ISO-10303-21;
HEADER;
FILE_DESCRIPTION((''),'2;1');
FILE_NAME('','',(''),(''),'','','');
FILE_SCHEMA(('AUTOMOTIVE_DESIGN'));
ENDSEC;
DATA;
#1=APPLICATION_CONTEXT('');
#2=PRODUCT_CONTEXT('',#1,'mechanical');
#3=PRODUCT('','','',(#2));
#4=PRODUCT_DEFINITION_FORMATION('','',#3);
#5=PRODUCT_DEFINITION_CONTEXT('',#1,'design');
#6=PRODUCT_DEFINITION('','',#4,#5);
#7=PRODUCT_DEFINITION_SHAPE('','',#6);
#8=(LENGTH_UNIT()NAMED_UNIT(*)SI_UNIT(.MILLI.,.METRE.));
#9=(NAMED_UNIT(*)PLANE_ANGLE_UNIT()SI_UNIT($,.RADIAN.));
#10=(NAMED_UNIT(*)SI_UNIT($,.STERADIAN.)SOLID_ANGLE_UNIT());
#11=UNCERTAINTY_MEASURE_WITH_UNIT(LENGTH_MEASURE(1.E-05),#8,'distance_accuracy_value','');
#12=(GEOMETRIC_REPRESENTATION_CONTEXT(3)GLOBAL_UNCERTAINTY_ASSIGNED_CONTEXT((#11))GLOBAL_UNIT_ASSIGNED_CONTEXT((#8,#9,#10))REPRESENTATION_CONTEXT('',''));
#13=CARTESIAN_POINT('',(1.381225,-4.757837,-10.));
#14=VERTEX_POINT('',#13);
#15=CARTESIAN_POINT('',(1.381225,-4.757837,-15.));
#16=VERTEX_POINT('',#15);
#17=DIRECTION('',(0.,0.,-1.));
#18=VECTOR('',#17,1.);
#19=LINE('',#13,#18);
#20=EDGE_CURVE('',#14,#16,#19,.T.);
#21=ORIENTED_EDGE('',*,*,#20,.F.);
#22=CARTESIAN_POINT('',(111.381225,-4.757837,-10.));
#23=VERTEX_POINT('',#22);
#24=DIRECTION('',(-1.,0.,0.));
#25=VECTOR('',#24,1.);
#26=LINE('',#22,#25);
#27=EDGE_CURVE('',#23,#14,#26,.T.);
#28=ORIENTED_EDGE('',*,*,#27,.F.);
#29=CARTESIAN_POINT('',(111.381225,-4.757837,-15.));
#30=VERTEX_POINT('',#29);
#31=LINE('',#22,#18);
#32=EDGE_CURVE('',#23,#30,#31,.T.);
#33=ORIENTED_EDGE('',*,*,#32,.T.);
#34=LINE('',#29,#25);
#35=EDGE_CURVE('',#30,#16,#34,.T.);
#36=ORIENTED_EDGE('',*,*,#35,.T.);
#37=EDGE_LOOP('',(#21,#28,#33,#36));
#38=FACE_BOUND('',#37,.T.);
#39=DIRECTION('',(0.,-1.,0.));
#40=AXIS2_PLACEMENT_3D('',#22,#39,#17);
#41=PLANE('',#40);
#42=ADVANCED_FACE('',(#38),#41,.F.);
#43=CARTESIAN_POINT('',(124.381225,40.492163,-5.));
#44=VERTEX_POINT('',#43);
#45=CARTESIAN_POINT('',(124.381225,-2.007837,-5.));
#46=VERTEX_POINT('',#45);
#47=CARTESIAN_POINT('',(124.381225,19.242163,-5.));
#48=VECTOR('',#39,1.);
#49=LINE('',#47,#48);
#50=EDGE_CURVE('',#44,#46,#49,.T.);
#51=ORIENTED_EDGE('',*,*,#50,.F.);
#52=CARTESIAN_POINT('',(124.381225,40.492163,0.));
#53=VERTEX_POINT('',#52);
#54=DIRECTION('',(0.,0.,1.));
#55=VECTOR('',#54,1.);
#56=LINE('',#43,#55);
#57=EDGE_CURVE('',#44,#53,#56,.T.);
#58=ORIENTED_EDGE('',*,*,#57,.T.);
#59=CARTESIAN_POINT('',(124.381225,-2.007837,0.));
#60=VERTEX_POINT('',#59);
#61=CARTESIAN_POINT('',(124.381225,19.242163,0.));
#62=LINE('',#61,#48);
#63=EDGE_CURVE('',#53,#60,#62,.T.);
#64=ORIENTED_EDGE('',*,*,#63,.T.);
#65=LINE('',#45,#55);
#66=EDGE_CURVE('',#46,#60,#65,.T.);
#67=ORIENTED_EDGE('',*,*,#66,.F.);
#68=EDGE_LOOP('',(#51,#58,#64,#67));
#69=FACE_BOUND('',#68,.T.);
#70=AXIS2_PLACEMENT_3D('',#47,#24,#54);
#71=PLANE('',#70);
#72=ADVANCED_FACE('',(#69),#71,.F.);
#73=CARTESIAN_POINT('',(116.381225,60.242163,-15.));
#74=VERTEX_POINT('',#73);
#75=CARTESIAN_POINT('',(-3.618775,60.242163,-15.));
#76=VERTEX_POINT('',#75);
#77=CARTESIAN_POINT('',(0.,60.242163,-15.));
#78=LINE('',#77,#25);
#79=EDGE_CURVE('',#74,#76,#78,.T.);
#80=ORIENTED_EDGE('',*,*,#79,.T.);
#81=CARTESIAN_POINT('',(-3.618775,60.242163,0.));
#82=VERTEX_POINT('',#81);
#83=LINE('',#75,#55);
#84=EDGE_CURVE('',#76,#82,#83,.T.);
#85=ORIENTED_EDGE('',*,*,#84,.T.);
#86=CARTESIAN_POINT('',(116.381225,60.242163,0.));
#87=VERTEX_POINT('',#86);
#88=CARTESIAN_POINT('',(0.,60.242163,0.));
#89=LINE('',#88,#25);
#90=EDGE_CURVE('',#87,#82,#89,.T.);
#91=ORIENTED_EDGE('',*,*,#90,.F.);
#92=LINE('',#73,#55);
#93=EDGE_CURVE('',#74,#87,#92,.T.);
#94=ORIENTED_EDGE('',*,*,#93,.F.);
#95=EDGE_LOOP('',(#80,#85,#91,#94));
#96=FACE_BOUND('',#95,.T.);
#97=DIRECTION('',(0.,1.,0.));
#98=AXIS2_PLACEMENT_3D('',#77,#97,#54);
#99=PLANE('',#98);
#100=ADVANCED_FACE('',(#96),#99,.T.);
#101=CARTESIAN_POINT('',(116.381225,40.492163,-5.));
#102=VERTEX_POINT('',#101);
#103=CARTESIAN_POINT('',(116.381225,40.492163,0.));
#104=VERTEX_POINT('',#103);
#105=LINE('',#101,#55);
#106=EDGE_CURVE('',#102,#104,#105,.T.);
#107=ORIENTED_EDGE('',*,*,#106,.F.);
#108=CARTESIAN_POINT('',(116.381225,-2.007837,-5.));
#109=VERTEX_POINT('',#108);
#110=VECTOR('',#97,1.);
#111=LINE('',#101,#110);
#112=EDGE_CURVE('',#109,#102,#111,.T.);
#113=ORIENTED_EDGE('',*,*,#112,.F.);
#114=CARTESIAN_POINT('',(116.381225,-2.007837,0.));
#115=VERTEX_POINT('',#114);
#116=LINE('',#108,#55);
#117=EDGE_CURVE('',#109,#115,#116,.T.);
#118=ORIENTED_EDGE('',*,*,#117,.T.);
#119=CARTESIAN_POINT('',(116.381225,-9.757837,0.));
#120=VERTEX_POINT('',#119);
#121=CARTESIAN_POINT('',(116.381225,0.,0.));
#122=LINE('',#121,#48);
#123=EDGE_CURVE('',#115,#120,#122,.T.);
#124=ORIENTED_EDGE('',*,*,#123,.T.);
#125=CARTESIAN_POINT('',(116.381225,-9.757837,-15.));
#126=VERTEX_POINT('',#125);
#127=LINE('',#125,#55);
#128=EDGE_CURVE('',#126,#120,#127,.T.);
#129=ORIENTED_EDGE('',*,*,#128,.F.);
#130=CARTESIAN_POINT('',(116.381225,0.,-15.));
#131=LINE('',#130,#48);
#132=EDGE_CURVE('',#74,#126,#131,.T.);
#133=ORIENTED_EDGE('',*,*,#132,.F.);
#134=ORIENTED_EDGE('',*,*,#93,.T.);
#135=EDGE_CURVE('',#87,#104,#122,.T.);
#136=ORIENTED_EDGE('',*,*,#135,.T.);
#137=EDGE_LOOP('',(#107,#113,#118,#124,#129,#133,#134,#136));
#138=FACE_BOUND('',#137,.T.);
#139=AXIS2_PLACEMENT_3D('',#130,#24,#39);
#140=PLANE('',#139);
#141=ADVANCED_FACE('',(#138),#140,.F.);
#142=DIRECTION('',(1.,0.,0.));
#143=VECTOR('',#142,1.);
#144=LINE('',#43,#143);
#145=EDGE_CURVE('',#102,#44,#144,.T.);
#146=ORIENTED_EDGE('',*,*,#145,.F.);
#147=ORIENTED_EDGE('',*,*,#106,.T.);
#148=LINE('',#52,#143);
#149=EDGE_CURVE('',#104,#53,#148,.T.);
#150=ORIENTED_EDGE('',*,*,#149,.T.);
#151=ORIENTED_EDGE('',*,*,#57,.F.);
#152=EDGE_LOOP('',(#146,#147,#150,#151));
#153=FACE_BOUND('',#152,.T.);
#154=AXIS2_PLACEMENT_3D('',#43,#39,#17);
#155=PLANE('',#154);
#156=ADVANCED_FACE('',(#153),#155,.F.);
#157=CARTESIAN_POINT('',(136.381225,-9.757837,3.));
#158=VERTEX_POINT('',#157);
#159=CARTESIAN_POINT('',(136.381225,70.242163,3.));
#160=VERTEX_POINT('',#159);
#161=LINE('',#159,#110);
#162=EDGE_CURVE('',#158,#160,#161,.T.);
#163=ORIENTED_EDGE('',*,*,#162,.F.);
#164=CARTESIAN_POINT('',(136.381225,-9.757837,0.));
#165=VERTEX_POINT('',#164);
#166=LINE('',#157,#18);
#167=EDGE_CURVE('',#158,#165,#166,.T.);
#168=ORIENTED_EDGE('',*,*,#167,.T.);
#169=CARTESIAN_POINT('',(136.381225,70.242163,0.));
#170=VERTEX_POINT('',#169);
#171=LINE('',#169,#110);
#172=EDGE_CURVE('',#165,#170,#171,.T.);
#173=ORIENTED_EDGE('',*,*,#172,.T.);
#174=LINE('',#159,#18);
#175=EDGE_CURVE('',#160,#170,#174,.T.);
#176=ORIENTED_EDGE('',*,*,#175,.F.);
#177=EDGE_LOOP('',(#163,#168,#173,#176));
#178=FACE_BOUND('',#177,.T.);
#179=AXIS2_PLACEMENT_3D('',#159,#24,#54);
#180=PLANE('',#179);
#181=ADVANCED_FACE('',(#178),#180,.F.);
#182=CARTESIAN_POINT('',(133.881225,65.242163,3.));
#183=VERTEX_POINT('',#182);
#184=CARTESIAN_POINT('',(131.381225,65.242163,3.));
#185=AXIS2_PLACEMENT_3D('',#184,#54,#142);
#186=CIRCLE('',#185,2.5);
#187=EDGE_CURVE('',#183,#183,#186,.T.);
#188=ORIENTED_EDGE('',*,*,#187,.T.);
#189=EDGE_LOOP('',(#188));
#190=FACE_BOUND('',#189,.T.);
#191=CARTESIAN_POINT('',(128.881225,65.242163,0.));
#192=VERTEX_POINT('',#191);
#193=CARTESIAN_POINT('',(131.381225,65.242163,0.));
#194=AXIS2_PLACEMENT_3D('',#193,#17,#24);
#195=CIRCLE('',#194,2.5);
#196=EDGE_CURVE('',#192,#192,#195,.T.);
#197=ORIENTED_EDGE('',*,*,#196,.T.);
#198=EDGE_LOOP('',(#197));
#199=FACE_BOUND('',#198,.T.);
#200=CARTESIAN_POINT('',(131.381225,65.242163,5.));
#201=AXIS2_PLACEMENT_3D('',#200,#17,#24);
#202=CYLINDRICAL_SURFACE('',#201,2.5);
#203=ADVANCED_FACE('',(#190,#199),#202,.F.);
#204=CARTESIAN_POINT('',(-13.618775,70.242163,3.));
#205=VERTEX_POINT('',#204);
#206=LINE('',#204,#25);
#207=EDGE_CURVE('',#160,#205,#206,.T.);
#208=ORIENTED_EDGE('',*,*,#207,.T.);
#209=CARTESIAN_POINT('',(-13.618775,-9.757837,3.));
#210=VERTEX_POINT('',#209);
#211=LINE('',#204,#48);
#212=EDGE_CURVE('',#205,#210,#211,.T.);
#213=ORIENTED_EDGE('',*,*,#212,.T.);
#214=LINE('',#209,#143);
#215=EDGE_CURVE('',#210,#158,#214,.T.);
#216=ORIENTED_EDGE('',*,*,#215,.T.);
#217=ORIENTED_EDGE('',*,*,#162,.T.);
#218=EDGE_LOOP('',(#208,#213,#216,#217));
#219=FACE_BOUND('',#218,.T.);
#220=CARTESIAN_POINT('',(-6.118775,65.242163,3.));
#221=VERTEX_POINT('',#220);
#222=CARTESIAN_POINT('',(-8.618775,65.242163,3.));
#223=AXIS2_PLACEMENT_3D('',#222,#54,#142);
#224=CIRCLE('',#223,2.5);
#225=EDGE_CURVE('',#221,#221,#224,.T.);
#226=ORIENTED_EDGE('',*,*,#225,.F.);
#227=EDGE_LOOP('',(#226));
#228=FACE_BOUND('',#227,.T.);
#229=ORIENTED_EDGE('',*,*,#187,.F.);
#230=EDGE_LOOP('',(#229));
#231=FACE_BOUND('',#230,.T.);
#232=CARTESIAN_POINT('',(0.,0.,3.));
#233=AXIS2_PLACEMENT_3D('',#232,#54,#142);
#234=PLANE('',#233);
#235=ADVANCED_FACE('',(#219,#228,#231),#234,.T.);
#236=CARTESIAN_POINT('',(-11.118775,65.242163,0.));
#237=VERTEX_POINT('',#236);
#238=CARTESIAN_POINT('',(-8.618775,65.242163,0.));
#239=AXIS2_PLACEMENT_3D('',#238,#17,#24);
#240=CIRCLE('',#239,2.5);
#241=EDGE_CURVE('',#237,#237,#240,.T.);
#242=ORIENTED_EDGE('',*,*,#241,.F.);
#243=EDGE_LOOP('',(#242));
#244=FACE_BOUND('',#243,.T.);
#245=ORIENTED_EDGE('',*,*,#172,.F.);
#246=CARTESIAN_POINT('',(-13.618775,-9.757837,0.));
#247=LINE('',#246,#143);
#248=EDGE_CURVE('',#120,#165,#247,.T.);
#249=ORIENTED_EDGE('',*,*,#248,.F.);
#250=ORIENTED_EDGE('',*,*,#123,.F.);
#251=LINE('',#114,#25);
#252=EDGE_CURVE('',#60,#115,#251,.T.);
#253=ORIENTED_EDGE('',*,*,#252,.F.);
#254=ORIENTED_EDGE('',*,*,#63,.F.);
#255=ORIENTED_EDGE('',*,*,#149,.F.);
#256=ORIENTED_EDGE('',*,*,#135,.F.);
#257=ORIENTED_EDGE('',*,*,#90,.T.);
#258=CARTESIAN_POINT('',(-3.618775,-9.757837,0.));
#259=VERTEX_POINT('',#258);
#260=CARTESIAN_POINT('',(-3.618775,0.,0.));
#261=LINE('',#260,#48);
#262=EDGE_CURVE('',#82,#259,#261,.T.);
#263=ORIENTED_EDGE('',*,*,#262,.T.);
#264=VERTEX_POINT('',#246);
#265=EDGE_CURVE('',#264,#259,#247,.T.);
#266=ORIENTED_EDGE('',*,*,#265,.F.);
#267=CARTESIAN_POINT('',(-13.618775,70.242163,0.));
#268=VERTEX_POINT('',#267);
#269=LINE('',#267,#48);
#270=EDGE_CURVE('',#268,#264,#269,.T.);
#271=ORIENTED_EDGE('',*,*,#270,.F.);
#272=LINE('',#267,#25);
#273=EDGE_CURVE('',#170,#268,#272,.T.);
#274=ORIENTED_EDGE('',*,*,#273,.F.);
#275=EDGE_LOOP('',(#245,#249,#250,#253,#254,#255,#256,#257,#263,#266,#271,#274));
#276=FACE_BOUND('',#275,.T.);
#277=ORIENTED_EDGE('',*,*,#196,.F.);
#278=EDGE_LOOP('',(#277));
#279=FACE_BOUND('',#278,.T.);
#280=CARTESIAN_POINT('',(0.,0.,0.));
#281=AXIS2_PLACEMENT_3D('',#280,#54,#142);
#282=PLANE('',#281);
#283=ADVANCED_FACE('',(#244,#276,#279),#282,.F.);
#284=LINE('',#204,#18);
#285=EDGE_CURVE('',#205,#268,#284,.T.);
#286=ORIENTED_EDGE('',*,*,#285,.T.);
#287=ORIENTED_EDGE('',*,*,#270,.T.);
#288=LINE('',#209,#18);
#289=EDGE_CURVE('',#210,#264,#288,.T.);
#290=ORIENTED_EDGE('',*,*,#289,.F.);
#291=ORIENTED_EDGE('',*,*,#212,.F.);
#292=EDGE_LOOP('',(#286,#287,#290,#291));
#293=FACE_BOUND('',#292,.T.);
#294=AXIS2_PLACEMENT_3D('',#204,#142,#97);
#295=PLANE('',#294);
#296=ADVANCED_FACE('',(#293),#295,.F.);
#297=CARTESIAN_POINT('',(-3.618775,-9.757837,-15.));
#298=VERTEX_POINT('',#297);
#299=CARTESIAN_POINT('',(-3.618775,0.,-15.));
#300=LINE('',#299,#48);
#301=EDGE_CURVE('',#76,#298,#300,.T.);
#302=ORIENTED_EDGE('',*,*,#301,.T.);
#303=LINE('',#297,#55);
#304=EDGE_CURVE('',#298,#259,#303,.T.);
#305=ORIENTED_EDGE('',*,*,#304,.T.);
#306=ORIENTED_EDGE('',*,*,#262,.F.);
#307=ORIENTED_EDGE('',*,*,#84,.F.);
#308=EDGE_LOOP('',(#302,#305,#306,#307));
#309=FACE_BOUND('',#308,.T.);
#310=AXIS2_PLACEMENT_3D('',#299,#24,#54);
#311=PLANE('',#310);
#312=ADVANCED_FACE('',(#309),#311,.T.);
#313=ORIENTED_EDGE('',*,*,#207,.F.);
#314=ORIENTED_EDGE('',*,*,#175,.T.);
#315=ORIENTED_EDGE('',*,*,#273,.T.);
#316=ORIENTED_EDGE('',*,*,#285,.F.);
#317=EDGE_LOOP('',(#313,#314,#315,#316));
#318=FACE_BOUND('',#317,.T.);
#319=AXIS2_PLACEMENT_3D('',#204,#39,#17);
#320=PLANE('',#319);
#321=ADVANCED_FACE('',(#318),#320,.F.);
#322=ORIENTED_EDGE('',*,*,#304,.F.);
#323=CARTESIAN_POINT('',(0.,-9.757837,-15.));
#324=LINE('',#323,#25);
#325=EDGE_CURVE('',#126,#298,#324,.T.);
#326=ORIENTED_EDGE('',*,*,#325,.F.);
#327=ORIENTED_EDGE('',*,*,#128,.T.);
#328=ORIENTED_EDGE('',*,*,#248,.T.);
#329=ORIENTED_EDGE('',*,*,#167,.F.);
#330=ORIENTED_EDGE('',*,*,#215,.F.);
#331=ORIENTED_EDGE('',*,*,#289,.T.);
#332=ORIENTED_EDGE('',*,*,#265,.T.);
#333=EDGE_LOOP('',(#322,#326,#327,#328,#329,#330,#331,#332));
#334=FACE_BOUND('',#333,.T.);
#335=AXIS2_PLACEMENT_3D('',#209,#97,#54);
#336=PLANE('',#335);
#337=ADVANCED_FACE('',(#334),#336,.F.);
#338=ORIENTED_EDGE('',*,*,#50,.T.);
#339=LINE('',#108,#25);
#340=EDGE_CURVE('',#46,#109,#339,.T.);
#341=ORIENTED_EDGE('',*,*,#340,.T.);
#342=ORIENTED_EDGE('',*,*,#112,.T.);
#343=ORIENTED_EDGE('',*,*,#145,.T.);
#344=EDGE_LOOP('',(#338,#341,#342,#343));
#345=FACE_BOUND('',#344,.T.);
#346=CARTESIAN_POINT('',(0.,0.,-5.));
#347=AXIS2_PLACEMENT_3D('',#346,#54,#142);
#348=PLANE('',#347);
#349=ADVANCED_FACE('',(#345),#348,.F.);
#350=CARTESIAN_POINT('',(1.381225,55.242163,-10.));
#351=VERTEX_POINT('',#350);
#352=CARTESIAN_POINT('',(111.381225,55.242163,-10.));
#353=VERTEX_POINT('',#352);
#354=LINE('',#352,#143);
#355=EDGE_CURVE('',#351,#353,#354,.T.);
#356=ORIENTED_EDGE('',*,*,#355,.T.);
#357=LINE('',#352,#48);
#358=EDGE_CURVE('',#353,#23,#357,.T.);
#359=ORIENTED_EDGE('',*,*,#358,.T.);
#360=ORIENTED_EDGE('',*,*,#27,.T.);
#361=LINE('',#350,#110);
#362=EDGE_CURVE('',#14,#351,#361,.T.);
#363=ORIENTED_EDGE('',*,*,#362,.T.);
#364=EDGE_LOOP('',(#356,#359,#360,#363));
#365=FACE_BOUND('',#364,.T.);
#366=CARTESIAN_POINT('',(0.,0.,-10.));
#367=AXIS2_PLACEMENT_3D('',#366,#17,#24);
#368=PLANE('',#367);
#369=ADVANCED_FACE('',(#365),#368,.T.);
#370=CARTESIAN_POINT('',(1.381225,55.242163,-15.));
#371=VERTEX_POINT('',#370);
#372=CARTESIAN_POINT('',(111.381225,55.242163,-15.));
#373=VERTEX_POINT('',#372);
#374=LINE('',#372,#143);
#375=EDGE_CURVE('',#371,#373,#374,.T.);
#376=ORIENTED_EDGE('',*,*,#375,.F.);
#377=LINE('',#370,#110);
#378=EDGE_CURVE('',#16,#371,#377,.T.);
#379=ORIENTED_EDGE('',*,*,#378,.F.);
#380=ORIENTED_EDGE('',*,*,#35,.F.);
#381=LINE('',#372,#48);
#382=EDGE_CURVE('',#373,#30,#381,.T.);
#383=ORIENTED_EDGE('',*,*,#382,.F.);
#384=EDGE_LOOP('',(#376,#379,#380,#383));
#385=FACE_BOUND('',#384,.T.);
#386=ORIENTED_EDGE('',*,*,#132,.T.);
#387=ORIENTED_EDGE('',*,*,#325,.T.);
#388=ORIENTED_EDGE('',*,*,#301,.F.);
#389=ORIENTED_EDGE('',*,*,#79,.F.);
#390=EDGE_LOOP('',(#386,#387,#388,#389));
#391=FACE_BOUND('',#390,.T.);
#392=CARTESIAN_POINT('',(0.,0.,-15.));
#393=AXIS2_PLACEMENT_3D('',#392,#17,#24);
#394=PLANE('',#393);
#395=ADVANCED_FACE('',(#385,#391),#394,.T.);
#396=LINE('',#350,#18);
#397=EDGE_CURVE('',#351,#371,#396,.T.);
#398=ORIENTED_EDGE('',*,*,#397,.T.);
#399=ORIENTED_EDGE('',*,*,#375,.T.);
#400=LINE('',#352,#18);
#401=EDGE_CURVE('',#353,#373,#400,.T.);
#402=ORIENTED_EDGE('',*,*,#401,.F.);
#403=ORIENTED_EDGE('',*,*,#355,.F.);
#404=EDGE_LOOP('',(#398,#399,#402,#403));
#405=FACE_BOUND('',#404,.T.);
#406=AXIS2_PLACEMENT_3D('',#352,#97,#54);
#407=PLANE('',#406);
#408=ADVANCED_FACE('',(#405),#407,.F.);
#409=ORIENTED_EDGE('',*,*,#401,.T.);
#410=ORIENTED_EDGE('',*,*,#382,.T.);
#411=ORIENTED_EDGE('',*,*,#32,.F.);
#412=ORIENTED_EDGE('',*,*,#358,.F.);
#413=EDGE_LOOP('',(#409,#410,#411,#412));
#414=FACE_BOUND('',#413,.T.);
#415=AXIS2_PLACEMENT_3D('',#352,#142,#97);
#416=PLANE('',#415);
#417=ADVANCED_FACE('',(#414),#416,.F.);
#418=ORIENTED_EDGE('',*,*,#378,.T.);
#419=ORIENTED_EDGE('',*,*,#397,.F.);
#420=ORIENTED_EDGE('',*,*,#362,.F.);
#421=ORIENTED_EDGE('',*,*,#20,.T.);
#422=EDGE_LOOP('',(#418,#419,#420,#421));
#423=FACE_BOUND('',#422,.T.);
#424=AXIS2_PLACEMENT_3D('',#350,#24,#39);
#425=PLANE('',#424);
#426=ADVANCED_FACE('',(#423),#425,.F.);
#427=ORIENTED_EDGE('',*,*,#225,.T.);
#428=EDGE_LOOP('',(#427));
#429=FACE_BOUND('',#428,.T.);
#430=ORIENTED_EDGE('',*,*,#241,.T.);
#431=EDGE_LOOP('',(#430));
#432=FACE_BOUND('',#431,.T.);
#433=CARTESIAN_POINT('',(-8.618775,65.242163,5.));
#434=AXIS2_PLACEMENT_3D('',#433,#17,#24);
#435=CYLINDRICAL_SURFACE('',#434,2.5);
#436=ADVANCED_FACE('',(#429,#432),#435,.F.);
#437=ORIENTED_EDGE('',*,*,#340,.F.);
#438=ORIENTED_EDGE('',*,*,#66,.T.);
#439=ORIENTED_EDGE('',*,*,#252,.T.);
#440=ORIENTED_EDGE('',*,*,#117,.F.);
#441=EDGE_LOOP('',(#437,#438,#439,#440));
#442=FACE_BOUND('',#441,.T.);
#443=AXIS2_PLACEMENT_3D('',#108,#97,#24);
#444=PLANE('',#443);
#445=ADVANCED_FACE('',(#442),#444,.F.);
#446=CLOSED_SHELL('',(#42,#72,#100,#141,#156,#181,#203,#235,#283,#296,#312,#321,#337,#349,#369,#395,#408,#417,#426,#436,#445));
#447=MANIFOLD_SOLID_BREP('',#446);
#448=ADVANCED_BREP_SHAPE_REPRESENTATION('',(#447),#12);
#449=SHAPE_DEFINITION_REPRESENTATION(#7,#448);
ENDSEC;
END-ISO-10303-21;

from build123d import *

# Parameters (mm, degrees)
SKETCH1_W               = 150
SKETCH1_H               = 80
BOSS_EXTRUDE2_DEPTH     = 3
BOSS_EXTRUDE4_OUTLINE_W = 120
BOSS_EXTRUDE4_OUTLINE_H = 70
BOSS_EXTRUDE4_DEPTH     = 15
BOSS_EXTRUDE5_DEPTH     = 5
SKETCH6_W               = 110
SKETCH6_H               = 60
CUT_EXTRUDE1_DEPTH      = 5
SKETCH7_R               = 2.5
CUT_EXTRUDE2_DEPTH      = 5


# Read off the part's stored shape, not the designer's step: Boss-Extrude4
with BuildPart() as part:
    # Sketch1 → Boss-Extrude2 (new body)
    with BuildSketch(Plane.XY):
        with Locations((61.381224804, 30.24216319)):
            Rectangle(SKETCH1_W, SKETCH1_H)
    extrude(amount=BOSS_EXTRUDE2_DEPTH)

    # Boss-Extrude4 outline → Boss-Extrude4 (add)
    with BuildSketch(Plane(origin=(0, 0, 0), x_dir=(-1, 0, 0), z_dir=(0, 0, -1))):
        with Locations((-56.381224804, 25.24216319)):
            Rectangle(BOSS_EXTRUDE4_OUTLINE_W, BOSS_EXTRUDE4_OUTLINE_H)
    extrude(amount=BOSS_EXTRUDE4_DEPTH)

    # Sketch5 → Boss-Extrude5 (add)
    with BuildSketch(Plane(origin=(0, 0, 0), x_dir=(-1, 0, 0), z_dir=(0, 0, -1))):
        Polygon((-124.381224804, 19.24216319), (-124.381224804, 40.49216319), (-116.381224804, 40.49216319), (-116.381224804, -2.00783681), (-124.381224804, -2.00783681), align=None)
    extrude(amount=BOSS_EXTRUDE5_DEPTH)

    # Sketch6 → Cut-Extrude1 (cut)
    with BuildSketch(Plane(origin=(0, 0, -15), x_dir=(-1, 0, 0), z_dir=(0, 0, -1))):
        with Locations((-56.381224804, 25.24216319)):
            Rectangle(SKETCH6_W, SKETCH6_H)
    extrude(amount=-CUT_EXTRUDE1_DEPTH, mode=Mode.SUBTRACT)

    # Sketch7 → Cut-Extrude2 (cut)
    with BuildSketch(Plane(origin=(0, 0, 0), x_dir=(-1, 0, 0), z_dir=(0, 0, -1))):
        with Locations((-131.381224804, 65.24216319)):
            Circle(SKETCH7_R)
        with Locations((8.618775196, 65.24216319)):
            Circle(SKETCH7_R)
        with Locations((-131.381224804, -29.765126005)):
            Circle(SKETCH7_R)
        with Locations((8.618775196, -29.765126005)):
            Circle(SKETCH7_R)
    extrude(amount=-CUT_EXTRUDE2_DEPTH, mode=Mode.SUBTRACT)


solid = part.part
